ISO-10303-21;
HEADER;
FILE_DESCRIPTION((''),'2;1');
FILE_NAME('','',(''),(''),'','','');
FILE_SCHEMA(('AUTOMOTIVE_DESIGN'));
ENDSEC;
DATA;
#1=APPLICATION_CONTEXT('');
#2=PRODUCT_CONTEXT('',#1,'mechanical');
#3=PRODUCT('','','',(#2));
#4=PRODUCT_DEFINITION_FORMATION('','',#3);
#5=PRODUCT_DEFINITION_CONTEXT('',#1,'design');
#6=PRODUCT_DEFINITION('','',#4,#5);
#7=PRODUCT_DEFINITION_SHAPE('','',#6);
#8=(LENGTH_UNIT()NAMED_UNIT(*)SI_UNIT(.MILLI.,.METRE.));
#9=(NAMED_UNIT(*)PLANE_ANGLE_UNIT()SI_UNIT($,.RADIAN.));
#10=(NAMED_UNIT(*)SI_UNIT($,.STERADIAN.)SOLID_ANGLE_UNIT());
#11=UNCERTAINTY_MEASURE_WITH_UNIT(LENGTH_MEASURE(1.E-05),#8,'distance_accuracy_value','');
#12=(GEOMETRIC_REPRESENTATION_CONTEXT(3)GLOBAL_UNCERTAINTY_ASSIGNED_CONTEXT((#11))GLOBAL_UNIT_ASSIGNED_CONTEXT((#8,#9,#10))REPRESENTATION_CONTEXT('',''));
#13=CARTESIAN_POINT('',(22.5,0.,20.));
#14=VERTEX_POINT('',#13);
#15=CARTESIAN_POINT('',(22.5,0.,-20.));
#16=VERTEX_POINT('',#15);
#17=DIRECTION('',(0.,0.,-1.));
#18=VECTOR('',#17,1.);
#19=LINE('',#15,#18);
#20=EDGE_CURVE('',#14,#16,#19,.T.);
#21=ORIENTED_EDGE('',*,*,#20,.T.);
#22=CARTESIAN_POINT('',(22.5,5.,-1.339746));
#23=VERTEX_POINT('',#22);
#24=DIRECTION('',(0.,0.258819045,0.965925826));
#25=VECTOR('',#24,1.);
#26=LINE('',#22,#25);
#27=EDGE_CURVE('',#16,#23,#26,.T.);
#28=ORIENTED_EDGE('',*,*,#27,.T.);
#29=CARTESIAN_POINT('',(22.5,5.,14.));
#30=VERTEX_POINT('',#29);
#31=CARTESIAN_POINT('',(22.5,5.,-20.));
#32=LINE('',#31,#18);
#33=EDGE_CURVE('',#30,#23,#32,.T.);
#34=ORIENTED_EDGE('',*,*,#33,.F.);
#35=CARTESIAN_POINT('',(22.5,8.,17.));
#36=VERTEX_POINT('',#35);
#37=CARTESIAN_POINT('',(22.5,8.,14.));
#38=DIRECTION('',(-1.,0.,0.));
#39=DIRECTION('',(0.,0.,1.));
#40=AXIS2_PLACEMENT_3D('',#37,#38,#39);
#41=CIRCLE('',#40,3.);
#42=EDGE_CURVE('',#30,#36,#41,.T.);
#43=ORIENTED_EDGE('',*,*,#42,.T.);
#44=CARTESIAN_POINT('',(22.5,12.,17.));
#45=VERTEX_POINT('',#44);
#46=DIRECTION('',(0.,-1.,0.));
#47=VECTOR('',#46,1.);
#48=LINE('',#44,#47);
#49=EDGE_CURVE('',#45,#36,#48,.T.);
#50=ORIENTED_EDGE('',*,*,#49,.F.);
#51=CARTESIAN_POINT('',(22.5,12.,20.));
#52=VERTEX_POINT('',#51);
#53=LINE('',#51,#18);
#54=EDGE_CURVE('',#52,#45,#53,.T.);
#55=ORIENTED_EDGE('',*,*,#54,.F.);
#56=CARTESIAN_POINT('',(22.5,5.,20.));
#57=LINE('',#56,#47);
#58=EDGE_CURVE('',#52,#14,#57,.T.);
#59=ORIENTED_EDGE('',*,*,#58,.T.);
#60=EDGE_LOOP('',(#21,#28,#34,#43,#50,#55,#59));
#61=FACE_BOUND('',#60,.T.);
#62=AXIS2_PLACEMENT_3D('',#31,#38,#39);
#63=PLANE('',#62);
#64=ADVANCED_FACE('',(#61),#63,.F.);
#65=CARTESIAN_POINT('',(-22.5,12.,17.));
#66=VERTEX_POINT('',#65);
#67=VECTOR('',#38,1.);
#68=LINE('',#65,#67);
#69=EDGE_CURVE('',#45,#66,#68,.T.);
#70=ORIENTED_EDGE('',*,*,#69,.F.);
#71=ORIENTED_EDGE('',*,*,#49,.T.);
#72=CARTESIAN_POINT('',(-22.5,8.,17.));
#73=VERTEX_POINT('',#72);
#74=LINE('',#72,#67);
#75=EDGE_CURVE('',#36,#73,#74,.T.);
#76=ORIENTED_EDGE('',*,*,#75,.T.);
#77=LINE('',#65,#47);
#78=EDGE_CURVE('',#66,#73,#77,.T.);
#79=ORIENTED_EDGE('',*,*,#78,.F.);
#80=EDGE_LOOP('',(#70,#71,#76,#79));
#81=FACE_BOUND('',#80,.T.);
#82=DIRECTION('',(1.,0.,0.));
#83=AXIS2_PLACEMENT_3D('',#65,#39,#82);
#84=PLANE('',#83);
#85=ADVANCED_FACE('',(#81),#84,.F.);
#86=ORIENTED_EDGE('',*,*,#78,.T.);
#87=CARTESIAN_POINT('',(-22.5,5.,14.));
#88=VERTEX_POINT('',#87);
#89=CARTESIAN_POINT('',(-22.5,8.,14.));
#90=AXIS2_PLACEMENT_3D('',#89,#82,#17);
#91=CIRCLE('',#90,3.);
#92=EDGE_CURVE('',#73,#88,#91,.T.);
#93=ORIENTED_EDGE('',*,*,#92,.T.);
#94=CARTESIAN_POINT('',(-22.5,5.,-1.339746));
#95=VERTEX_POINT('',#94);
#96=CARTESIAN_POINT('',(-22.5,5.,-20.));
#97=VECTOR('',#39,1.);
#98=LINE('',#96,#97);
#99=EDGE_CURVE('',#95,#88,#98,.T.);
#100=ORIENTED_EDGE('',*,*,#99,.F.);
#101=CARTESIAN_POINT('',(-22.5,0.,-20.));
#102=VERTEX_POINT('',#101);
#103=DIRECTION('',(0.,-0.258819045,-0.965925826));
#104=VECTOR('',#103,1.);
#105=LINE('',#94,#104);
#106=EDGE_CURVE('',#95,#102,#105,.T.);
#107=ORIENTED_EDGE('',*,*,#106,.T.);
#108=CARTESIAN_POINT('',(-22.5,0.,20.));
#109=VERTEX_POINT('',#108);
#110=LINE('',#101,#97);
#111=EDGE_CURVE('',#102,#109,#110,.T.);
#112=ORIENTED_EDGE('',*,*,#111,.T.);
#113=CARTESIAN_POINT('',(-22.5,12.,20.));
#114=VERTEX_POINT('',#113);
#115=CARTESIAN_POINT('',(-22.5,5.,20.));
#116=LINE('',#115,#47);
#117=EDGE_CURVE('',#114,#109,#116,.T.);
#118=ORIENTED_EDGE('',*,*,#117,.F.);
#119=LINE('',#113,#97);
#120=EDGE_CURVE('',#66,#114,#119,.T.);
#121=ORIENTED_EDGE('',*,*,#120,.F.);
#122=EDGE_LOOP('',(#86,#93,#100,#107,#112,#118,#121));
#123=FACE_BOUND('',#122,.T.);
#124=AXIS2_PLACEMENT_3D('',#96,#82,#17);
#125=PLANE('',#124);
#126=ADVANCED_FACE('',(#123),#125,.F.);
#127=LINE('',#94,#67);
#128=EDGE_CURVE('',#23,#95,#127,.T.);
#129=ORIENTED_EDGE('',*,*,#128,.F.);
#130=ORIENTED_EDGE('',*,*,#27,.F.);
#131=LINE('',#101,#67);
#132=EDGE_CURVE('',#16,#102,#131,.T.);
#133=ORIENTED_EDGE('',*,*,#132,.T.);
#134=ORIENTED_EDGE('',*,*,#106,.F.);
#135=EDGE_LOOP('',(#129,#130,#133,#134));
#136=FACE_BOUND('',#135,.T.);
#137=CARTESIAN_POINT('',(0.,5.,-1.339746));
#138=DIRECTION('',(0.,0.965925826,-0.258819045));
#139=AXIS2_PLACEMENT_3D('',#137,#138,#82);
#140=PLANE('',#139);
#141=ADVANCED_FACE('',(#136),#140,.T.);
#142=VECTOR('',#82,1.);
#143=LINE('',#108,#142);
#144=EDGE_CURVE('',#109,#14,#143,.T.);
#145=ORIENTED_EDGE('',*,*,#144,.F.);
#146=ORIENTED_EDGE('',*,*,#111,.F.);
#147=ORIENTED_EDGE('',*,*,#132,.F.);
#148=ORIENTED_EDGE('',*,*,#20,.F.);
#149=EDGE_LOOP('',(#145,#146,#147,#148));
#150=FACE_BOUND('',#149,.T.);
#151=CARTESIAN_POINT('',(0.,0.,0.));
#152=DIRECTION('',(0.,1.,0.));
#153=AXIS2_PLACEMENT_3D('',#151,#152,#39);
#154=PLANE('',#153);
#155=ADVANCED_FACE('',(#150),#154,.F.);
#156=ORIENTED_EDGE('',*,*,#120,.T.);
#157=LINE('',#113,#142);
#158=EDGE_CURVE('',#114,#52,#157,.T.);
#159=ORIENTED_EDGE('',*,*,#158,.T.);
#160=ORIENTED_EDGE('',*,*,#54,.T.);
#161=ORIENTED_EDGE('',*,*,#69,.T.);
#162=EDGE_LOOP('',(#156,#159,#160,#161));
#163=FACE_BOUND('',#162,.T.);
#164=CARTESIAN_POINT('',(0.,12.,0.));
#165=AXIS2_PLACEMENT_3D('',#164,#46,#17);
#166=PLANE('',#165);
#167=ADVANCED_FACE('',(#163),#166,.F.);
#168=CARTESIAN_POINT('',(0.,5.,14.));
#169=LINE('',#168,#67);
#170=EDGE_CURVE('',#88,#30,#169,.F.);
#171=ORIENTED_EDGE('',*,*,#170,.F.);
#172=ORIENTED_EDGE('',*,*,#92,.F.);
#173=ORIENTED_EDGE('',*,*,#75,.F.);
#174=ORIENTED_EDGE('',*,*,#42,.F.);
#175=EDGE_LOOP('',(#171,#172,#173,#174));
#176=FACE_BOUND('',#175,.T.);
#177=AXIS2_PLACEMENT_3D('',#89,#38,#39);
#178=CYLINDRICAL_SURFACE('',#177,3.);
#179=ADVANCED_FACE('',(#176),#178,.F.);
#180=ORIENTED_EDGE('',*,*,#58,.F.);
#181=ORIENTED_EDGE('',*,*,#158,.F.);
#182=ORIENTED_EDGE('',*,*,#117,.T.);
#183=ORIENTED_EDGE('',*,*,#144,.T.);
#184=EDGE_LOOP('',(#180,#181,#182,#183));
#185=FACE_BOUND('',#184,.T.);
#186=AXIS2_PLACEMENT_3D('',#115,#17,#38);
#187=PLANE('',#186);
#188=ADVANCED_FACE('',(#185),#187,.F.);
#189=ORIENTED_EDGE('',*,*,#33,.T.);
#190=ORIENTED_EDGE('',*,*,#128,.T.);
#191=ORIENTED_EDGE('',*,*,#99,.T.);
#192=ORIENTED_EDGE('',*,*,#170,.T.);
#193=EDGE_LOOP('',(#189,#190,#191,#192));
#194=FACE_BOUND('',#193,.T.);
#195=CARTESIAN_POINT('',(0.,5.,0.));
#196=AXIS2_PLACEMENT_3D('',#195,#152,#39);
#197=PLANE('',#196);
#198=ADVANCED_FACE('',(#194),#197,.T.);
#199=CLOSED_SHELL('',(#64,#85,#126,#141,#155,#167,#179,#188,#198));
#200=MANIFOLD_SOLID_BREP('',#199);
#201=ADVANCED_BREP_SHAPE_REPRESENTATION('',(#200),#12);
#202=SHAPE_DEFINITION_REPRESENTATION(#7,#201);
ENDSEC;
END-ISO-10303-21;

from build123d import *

# Parameters (mm, degrees)
SKETCH1_W           = 45
SKETCH1_H           = 40
BOSS_EXTRUDE1_DEPTH = 5
CHAMFER1_SIZE       = 5
CHAMFER1_SIZE_2     = 18.660254038
SKETCH2_W           = 45
SKETCH2_H           = 3
BOSS_EXTRUDE2_DEPTH = 7
FILLET1_R           = 3


with BuildPart() as part:
    # Sketch1 → Boss-Extrude1 (new body)
    with BuildSketch(Plane(origin=(0, 0, 0), x_dir=(1, 0, 0), z_dir=(0, 1, 0))):
        Rectangle(SKETCH1_W, SKETCH1_H)
    extrude(amount=BOSS_EXTRUDE1_DEPTH)

    # Chamfer1
    # the kernel refuses this chamfer: 18.660254038, 5 mm, written as the material it takes off along each edge
    with BuildSketch(Plane(origin=(-70.955484165, 5, -20), x_dir=(0, -0.9905000388259539, -0.13751244702129164), z_dir=(1, 0, 0))) as chamfer1_piece_1:
        Polygon((CHAMFER1_SIZE * 0.990500038826, -CHAMFER1_SIZE * 0.137512447021), (-CHAMFER1_SIZE_2 * 0.13751244702, -CHAMFER1_SIZE_2 * 0.990500038818), (0, 0), align=None)
    extrude(amount=141.910968331, mode=Mode.SUBTRACT)

    # Sketch2 → Boss-Extrude2 (add)
    with BuildSketch(Plane(origin=(0, 5, 0), x_dir=(1, 0, 0), z_dir=(0, 1, 0))):
        with Locations((0, -18.5)):
            Rectangle(SKETCH2_W, SKETCH2_H)
    extrude(amount=BOSS_EXTRUDE2_DEPTH)

    # Fillet1
    fillet1_edges = [part.edges().sort_by_distance(p)[0] for p in [
        (0, 5, 17),
    ]]
    fillet(fillet1_edges, radius=FILLET1_R)


solid = part.part
